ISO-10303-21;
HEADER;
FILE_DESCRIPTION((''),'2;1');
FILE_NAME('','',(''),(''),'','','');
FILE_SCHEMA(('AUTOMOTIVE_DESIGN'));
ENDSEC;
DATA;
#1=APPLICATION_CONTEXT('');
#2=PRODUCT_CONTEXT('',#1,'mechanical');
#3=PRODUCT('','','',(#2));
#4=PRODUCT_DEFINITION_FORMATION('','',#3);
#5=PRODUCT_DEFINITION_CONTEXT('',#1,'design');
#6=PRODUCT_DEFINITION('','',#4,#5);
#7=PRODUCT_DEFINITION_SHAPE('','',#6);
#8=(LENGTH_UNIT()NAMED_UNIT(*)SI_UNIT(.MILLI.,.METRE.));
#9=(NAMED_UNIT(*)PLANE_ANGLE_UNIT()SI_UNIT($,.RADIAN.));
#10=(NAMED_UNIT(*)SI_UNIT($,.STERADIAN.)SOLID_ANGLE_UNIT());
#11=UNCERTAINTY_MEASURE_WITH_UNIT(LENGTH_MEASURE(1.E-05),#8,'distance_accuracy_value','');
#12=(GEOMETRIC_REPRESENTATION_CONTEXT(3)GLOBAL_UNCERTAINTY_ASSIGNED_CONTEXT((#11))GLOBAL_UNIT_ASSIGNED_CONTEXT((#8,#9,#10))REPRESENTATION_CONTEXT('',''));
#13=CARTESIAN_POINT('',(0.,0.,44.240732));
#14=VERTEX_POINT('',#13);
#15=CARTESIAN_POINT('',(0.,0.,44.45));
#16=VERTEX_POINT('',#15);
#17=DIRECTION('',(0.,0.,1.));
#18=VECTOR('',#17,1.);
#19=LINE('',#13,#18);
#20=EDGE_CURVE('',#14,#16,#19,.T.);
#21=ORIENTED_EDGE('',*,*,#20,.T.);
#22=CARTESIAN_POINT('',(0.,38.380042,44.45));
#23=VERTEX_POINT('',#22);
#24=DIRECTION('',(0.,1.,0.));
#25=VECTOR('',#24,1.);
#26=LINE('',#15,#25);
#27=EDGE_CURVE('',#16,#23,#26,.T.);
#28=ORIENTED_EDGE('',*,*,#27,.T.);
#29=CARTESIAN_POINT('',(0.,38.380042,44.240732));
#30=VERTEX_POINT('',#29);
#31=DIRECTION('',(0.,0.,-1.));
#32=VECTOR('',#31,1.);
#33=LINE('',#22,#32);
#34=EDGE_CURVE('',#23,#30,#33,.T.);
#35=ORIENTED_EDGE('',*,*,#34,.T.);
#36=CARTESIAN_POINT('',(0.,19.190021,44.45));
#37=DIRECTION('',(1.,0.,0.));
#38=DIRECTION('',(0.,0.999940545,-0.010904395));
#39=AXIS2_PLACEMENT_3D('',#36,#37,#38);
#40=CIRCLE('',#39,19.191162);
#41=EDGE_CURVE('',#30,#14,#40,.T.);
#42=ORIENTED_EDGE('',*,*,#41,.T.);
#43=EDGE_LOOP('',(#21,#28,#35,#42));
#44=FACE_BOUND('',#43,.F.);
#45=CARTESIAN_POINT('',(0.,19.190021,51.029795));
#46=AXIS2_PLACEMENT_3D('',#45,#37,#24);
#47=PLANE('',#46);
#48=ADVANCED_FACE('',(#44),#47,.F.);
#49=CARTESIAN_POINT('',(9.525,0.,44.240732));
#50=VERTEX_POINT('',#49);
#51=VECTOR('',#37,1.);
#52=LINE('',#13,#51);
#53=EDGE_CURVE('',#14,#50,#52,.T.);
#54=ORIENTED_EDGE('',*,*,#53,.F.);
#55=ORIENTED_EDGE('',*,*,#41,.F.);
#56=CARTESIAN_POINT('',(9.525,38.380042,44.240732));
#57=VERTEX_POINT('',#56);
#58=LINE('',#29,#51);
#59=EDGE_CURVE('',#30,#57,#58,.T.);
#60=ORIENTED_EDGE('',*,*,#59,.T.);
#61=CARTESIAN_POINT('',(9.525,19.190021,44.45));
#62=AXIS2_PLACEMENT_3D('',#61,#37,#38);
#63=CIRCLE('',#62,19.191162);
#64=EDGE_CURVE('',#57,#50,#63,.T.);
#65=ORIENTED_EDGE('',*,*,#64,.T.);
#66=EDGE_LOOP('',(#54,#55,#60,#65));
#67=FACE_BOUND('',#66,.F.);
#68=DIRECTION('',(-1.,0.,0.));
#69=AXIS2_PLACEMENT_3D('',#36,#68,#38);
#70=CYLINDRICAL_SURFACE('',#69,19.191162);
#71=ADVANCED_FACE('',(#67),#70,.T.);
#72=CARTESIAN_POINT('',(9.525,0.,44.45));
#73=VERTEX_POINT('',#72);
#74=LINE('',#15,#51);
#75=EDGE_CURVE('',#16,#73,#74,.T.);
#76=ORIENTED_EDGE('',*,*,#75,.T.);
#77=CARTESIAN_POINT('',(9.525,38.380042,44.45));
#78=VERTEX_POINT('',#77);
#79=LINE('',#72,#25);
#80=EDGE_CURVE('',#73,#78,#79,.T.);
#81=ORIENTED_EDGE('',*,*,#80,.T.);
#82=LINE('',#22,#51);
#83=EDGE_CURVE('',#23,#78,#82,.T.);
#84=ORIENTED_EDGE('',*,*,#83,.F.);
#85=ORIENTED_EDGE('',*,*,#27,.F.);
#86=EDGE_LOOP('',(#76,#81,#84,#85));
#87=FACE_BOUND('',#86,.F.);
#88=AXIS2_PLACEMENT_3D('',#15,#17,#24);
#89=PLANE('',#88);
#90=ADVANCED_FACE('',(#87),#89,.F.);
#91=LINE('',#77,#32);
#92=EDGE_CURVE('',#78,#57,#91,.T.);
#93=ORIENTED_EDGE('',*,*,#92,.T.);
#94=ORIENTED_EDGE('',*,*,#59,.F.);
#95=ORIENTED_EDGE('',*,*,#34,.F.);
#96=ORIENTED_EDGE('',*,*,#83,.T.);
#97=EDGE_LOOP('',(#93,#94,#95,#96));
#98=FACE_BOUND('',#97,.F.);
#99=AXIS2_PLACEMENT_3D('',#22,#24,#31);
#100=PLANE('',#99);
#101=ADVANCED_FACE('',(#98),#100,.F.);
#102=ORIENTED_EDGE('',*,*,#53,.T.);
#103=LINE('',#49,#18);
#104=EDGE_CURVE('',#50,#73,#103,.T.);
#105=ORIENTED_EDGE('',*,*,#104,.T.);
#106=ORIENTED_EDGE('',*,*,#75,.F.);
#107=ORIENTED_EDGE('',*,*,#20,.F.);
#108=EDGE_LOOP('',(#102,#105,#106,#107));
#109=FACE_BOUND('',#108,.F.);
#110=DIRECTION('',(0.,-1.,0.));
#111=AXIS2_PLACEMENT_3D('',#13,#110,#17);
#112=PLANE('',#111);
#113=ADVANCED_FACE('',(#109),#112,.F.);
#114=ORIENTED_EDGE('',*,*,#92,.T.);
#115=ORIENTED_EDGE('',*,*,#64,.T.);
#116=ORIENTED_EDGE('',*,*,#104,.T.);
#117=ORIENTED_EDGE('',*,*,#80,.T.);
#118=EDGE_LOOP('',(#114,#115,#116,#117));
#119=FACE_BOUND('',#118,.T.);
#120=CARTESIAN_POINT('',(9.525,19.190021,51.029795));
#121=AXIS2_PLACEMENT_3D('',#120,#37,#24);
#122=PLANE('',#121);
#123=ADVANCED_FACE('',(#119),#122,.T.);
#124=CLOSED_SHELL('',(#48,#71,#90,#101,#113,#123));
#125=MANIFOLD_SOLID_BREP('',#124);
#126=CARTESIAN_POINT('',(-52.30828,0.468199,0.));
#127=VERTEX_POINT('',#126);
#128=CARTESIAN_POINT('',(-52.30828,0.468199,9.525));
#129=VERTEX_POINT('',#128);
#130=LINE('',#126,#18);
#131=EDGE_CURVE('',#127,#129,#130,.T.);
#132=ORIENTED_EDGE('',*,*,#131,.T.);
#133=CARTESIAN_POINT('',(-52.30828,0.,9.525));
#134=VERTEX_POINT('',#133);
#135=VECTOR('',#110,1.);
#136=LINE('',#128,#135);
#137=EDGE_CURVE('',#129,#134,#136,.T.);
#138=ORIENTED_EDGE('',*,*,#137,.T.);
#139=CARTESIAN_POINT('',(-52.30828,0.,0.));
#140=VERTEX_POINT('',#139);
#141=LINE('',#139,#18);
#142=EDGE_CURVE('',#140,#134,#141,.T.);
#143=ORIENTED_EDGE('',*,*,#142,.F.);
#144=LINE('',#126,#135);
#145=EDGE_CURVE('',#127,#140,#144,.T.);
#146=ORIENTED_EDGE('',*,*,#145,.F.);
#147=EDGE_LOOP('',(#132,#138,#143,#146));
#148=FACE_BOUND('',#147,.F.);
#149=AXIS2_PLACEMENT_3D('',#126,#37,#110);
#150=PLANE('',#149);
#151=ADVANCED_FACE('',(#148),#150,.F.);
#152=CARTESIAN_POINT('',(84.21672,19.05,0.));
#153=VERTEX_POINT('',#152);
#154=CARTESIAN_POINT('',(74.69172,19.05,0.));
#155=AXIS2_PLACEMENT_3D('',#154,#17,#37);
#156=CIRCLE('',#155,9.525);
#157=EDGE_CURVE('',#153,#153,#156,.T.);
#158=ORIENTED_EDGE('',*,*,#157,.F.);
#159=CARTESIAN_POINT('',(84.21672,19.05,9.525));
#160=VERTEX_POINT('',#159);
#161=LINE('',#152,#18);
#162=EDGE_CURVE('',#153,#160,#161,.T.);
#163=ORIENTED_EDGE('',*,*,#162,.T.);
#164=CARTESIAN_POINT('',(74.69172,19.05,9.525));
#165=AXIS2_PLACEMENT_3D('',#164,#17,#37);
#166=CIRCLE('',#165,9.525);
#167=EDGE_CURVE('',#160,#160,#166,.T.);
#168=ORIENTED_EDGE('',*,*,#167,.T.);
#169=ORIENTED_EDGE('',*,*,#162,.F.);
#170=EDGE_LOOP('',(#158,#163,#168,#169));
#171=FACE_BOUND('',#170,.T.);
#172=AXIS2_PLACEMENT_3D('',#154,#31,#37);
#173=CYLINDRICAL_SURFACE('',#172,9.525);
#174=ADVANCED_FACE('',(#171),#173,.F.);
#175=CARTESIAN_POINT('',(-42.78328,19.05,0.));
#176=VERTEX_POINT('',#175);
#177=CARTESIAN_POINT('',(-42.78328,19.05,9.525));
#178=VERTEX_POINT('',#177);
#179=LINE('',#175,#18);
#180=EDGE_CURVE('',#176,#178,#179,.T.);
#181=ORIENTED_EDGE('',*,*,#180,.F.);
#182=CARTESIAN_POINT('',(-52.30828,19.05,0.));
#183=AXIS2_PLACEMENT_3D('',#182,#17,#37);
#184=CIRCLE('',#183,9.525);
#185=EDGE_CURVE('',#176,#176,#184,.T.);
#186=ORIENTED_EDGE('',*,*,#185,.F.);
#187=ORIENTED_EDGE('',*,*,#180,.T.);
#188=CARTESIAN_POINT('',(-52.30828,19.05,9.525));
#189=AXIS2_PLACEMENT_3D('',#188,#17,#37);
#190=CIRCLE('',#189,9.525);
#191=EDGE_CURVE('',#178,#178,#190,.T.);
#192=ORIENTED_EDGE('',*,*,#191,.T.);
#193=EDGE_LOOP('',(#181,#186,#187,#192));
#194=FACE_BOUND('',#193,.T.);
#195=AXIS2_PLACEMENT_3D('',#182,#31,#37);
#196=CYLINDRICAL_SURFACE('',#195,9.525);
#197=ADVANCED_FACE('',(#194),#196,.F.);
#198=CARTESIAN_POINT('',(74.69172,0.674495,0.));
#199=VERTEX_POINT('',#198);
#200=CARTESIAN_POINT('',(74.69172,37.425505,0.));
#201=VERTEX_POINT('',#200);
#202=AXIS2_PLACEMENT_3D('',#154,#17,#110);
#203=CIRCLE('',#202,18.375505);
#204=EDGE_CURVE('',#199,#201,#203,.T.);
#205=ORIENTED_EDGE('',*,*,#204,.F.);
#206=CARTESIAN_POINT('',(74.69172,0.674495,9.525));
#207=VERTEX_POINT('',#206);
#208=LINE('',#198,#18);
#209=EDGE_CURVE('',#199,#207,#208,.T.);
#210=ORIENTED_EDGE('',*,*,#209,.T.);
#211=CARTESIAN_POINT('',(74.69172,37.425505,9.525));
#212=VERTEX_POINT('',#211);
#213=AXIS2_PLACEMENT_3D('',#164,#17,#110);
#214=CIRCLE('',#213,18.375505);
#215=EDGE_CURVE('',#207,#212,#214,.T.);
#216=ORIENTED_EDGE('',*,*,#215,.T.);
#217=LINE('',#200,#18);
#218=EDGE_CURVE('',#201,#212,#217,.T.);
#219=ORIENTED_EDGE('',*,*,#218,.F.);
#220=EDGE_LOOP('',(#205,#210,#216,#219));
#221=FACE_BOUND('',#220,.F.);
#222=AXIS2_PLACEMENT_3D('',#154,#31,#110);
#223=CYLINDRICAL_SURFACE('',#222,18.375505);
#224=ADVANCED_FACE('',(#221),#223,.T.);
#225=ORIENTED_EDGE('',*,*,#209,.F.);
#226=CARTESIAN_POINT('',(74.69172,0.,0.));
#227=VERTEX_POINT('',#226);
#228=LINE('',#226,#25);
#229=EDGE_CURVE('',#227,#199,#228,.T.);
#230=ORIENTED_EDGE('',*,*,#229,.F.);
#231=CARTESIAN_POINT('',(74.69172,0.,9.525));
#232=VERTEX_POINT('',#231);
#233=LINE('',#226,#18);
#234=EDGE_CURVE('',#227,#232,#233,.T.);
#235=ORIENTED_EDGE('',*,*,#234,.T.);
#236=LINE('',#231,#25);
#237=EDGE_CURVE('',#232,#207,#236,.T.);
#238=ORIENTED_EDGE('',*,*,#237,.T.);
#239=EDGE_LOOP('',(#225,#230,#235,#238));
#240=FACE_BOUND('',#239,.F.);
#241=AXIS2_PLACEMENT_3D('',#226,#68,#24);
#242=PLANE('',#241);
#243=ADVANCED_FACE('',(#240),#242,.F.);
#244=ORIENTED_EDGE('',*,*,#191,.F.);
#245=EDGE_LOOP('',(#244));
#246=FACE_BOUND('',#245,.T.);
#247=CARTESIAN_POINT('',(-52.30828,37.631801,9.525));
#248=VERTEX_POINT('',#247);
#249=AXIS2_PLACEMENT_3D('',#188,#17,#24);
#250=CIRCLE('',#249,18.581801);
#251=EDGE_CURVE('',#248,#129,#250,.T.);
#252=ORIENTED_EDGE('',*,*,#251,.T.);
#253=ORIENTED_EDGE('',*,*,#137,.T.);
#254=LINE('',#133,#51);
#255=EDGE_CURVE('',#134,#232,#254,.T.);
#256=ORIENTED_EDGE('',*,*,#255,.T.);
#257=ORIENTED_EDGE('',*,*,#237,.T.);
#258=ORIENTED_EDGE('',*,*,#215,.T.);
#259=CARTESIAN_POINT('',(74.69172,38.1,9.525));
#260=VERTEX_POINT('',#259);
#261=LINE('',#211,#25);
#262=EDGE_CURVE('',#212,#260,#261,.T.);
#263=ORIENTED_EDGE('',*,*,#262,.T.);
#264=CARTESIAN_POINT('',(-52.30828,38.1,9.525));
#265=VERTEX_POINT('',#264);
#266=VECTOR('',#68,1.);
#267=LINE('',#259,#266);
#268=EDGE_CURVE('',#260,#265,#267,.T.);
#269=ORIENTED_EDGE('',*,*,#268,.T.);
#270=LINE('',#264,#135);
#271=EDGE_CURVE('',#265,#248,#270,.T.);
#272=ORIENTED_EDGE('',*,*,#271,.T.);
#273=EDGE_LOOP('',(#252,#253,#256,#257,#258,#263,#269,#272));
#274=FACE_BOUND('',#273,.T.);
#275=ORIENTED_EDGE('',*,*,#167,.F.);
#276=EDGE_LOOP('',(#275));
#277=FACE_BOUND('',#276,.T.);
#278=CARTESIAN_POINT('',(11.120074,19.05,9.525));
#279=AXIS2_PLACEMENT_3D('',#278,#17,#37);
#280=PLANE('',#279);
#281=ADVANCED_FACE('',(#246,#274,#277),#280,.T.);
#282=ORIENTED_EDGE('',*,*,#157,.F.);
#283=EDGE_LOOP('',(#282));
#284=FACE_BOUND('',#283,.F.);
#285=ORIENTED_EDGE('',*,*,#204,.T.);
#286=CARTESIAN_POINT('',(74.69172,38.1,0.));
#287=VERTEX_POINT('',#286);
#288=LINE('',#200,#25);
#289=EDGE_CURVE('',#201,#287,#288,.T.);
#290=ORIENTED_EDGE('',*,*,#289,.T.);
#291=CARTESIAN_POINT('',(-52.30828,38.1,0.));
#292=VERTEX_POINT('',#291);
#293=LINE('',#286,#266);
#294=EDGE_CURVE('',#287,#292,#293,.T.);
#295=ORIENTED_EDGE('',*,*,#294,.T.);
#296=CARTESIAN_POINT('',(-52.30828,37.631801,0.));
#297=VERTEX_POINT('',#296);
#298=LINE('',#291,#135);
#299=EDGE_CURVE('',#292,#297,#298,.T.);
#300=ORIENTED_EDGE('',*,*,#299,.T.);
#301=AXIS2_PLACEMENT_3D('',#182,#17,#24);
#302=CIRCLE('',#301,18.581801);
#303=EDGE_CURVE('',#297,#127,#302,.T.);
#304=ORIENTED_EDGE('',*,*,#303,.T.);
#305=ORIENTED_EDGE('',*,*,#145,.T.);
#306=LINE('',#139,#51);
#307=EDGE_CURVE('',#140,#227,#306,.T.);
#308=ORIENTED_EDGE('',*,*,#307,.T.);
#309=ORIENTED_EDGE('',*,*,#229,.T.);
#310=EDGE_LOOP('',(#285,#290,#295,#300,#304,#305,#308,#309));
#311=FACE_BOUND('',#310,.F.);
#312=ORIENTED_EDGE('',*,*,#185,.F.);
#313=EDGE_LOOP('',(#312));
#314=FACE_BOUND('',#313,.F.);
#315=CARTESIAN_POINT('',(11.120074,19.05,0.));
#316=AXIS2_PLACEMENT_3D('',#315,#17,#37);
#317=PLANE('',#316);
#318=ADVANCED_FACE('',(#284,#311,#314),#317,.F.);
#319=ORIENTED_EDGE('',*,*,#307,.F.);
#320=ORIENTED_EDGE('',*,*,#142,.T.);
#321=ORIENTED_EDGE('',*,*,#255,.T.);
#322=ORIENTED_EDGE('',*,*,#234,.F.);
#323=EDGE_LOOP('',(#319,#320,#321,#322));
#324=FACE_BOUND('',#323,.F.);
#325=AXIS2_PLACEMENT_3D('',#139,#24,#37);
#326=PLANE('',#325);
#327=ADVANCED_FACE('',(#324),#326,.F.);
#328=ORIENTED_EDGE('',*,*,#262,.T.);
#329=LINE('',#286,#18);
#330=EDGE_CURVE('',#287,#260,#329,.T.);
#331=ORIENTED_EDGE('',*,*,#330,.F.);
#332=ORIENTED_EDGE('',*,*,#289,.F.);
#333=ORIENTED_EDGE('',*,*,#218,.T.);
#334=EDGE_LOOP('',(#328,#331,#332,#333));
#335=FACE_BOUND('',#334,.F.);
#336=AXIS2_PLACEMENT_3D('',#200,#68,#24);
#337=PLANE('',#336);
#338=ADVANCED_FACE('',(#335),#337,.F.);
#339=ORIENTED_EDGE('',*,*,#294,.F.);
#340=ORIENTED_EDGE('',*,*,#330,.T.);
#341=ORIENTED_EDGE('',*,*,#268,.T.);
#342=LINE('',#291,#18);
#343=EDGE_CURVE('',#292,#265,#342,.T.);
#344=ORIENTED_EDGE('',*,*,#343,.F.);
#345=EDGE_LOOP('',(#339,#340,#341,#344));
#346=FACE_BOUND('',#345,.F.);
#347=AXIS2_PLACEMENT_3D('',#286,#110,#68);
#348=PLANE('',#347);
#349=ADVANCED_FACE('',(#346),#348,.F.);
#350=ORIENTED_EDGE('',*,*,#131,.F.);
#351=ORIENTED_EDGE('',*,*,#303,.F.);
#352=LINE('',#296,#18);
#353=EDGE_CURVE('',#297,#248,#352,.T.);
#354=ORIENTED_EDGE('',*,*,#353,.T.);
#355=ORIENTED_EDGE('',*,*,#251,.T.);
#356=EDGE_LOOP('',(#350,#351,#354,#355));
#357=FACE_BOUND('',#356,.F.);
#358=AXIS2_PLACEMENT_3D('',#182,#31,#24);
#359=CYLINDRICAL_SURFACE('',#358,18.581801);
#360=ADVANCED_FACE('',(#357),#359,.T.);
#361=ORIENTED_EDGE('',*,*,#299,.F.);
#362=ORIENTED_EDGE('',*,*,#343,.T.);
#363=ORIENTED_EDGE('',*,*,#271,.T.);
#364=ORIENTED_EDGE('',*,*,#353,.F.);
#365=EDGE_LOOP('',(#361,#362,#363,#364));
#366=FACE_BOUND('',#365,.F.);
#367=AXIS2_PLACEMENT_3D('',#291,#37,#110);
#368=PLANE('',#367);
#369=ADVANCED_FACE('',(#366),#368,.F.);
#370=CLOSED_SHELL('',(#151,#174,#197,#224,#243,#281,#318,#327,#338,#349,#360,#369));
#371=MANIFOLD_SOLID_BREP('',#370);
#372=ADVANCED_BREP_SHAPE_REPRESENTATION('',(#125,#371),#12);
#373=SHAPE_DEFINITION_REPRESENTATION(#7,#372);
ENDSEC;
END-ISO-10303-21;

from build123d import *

# Parameters (mm, degrees)
F0_R     = 9.525
F1_DEPTH = 9.525
F3_DEPTH = 9.525


with BuildPart() as f1:
    # F0 (on Top) → F1 (new body)
    with BuildSketch(Plane.XY):
        with BuildLine():
            Line((-52.308280021, 0.4681994029), (-52.308280021, 0))
            Line((-52.308280021, 0), (74.691719979, 0))
            Line((74.691719979, 0), (74.691719979, 0.6744954629))
            ThreePointArc((74.691719979, 0.6744954629), (93.0672245161, 19.05), (74.691719979, 37.4255045371))
            Line((74.691719979, 37.4255045371), (74.691719979, 38.1))
            Line((74.691719979, 38.1), (-52.308280021, 38.1))
            Line((-52.308280021, 38.1), (-52.308280021, 37.6318005971))
            ThreePointArc((-52.308280021, 37.6318005971), (-70.890080618, 19.05), (-52.308280021, 0.4681994029))
        make_face()
        with Locations((-52.308280021, 19.05)):
            Circle(F0_R, mode=Mode.SUBTRACT)
        with Locations((74.691719979, 19.05)):
            Circle(F0_R, mode=Mode.SUBTRACT)
    extrude(amount=F1_DEPTH)


with BuildPart() as f3:
    # F2 (on Right) → F3 (new body)
    with BuildSketch(Plane.YZ):
        with BuildLine():
            ThreePointArc((38.3800417185, 44.2407319942), (19.1900208592, 63.6411618636), (0, 44.2407319942))
            Line((0, 44.2407319942), (0, 44.45))
            Line((0, 44.45), (38.3800417185, 44.45))
            Line((38.3800417185, 44.45), (38.3800417185, 44.2407319942))
        make_face()
    extrude(amount=F3_DEPTH)


solid = Compound([f1.part, f3.part])
